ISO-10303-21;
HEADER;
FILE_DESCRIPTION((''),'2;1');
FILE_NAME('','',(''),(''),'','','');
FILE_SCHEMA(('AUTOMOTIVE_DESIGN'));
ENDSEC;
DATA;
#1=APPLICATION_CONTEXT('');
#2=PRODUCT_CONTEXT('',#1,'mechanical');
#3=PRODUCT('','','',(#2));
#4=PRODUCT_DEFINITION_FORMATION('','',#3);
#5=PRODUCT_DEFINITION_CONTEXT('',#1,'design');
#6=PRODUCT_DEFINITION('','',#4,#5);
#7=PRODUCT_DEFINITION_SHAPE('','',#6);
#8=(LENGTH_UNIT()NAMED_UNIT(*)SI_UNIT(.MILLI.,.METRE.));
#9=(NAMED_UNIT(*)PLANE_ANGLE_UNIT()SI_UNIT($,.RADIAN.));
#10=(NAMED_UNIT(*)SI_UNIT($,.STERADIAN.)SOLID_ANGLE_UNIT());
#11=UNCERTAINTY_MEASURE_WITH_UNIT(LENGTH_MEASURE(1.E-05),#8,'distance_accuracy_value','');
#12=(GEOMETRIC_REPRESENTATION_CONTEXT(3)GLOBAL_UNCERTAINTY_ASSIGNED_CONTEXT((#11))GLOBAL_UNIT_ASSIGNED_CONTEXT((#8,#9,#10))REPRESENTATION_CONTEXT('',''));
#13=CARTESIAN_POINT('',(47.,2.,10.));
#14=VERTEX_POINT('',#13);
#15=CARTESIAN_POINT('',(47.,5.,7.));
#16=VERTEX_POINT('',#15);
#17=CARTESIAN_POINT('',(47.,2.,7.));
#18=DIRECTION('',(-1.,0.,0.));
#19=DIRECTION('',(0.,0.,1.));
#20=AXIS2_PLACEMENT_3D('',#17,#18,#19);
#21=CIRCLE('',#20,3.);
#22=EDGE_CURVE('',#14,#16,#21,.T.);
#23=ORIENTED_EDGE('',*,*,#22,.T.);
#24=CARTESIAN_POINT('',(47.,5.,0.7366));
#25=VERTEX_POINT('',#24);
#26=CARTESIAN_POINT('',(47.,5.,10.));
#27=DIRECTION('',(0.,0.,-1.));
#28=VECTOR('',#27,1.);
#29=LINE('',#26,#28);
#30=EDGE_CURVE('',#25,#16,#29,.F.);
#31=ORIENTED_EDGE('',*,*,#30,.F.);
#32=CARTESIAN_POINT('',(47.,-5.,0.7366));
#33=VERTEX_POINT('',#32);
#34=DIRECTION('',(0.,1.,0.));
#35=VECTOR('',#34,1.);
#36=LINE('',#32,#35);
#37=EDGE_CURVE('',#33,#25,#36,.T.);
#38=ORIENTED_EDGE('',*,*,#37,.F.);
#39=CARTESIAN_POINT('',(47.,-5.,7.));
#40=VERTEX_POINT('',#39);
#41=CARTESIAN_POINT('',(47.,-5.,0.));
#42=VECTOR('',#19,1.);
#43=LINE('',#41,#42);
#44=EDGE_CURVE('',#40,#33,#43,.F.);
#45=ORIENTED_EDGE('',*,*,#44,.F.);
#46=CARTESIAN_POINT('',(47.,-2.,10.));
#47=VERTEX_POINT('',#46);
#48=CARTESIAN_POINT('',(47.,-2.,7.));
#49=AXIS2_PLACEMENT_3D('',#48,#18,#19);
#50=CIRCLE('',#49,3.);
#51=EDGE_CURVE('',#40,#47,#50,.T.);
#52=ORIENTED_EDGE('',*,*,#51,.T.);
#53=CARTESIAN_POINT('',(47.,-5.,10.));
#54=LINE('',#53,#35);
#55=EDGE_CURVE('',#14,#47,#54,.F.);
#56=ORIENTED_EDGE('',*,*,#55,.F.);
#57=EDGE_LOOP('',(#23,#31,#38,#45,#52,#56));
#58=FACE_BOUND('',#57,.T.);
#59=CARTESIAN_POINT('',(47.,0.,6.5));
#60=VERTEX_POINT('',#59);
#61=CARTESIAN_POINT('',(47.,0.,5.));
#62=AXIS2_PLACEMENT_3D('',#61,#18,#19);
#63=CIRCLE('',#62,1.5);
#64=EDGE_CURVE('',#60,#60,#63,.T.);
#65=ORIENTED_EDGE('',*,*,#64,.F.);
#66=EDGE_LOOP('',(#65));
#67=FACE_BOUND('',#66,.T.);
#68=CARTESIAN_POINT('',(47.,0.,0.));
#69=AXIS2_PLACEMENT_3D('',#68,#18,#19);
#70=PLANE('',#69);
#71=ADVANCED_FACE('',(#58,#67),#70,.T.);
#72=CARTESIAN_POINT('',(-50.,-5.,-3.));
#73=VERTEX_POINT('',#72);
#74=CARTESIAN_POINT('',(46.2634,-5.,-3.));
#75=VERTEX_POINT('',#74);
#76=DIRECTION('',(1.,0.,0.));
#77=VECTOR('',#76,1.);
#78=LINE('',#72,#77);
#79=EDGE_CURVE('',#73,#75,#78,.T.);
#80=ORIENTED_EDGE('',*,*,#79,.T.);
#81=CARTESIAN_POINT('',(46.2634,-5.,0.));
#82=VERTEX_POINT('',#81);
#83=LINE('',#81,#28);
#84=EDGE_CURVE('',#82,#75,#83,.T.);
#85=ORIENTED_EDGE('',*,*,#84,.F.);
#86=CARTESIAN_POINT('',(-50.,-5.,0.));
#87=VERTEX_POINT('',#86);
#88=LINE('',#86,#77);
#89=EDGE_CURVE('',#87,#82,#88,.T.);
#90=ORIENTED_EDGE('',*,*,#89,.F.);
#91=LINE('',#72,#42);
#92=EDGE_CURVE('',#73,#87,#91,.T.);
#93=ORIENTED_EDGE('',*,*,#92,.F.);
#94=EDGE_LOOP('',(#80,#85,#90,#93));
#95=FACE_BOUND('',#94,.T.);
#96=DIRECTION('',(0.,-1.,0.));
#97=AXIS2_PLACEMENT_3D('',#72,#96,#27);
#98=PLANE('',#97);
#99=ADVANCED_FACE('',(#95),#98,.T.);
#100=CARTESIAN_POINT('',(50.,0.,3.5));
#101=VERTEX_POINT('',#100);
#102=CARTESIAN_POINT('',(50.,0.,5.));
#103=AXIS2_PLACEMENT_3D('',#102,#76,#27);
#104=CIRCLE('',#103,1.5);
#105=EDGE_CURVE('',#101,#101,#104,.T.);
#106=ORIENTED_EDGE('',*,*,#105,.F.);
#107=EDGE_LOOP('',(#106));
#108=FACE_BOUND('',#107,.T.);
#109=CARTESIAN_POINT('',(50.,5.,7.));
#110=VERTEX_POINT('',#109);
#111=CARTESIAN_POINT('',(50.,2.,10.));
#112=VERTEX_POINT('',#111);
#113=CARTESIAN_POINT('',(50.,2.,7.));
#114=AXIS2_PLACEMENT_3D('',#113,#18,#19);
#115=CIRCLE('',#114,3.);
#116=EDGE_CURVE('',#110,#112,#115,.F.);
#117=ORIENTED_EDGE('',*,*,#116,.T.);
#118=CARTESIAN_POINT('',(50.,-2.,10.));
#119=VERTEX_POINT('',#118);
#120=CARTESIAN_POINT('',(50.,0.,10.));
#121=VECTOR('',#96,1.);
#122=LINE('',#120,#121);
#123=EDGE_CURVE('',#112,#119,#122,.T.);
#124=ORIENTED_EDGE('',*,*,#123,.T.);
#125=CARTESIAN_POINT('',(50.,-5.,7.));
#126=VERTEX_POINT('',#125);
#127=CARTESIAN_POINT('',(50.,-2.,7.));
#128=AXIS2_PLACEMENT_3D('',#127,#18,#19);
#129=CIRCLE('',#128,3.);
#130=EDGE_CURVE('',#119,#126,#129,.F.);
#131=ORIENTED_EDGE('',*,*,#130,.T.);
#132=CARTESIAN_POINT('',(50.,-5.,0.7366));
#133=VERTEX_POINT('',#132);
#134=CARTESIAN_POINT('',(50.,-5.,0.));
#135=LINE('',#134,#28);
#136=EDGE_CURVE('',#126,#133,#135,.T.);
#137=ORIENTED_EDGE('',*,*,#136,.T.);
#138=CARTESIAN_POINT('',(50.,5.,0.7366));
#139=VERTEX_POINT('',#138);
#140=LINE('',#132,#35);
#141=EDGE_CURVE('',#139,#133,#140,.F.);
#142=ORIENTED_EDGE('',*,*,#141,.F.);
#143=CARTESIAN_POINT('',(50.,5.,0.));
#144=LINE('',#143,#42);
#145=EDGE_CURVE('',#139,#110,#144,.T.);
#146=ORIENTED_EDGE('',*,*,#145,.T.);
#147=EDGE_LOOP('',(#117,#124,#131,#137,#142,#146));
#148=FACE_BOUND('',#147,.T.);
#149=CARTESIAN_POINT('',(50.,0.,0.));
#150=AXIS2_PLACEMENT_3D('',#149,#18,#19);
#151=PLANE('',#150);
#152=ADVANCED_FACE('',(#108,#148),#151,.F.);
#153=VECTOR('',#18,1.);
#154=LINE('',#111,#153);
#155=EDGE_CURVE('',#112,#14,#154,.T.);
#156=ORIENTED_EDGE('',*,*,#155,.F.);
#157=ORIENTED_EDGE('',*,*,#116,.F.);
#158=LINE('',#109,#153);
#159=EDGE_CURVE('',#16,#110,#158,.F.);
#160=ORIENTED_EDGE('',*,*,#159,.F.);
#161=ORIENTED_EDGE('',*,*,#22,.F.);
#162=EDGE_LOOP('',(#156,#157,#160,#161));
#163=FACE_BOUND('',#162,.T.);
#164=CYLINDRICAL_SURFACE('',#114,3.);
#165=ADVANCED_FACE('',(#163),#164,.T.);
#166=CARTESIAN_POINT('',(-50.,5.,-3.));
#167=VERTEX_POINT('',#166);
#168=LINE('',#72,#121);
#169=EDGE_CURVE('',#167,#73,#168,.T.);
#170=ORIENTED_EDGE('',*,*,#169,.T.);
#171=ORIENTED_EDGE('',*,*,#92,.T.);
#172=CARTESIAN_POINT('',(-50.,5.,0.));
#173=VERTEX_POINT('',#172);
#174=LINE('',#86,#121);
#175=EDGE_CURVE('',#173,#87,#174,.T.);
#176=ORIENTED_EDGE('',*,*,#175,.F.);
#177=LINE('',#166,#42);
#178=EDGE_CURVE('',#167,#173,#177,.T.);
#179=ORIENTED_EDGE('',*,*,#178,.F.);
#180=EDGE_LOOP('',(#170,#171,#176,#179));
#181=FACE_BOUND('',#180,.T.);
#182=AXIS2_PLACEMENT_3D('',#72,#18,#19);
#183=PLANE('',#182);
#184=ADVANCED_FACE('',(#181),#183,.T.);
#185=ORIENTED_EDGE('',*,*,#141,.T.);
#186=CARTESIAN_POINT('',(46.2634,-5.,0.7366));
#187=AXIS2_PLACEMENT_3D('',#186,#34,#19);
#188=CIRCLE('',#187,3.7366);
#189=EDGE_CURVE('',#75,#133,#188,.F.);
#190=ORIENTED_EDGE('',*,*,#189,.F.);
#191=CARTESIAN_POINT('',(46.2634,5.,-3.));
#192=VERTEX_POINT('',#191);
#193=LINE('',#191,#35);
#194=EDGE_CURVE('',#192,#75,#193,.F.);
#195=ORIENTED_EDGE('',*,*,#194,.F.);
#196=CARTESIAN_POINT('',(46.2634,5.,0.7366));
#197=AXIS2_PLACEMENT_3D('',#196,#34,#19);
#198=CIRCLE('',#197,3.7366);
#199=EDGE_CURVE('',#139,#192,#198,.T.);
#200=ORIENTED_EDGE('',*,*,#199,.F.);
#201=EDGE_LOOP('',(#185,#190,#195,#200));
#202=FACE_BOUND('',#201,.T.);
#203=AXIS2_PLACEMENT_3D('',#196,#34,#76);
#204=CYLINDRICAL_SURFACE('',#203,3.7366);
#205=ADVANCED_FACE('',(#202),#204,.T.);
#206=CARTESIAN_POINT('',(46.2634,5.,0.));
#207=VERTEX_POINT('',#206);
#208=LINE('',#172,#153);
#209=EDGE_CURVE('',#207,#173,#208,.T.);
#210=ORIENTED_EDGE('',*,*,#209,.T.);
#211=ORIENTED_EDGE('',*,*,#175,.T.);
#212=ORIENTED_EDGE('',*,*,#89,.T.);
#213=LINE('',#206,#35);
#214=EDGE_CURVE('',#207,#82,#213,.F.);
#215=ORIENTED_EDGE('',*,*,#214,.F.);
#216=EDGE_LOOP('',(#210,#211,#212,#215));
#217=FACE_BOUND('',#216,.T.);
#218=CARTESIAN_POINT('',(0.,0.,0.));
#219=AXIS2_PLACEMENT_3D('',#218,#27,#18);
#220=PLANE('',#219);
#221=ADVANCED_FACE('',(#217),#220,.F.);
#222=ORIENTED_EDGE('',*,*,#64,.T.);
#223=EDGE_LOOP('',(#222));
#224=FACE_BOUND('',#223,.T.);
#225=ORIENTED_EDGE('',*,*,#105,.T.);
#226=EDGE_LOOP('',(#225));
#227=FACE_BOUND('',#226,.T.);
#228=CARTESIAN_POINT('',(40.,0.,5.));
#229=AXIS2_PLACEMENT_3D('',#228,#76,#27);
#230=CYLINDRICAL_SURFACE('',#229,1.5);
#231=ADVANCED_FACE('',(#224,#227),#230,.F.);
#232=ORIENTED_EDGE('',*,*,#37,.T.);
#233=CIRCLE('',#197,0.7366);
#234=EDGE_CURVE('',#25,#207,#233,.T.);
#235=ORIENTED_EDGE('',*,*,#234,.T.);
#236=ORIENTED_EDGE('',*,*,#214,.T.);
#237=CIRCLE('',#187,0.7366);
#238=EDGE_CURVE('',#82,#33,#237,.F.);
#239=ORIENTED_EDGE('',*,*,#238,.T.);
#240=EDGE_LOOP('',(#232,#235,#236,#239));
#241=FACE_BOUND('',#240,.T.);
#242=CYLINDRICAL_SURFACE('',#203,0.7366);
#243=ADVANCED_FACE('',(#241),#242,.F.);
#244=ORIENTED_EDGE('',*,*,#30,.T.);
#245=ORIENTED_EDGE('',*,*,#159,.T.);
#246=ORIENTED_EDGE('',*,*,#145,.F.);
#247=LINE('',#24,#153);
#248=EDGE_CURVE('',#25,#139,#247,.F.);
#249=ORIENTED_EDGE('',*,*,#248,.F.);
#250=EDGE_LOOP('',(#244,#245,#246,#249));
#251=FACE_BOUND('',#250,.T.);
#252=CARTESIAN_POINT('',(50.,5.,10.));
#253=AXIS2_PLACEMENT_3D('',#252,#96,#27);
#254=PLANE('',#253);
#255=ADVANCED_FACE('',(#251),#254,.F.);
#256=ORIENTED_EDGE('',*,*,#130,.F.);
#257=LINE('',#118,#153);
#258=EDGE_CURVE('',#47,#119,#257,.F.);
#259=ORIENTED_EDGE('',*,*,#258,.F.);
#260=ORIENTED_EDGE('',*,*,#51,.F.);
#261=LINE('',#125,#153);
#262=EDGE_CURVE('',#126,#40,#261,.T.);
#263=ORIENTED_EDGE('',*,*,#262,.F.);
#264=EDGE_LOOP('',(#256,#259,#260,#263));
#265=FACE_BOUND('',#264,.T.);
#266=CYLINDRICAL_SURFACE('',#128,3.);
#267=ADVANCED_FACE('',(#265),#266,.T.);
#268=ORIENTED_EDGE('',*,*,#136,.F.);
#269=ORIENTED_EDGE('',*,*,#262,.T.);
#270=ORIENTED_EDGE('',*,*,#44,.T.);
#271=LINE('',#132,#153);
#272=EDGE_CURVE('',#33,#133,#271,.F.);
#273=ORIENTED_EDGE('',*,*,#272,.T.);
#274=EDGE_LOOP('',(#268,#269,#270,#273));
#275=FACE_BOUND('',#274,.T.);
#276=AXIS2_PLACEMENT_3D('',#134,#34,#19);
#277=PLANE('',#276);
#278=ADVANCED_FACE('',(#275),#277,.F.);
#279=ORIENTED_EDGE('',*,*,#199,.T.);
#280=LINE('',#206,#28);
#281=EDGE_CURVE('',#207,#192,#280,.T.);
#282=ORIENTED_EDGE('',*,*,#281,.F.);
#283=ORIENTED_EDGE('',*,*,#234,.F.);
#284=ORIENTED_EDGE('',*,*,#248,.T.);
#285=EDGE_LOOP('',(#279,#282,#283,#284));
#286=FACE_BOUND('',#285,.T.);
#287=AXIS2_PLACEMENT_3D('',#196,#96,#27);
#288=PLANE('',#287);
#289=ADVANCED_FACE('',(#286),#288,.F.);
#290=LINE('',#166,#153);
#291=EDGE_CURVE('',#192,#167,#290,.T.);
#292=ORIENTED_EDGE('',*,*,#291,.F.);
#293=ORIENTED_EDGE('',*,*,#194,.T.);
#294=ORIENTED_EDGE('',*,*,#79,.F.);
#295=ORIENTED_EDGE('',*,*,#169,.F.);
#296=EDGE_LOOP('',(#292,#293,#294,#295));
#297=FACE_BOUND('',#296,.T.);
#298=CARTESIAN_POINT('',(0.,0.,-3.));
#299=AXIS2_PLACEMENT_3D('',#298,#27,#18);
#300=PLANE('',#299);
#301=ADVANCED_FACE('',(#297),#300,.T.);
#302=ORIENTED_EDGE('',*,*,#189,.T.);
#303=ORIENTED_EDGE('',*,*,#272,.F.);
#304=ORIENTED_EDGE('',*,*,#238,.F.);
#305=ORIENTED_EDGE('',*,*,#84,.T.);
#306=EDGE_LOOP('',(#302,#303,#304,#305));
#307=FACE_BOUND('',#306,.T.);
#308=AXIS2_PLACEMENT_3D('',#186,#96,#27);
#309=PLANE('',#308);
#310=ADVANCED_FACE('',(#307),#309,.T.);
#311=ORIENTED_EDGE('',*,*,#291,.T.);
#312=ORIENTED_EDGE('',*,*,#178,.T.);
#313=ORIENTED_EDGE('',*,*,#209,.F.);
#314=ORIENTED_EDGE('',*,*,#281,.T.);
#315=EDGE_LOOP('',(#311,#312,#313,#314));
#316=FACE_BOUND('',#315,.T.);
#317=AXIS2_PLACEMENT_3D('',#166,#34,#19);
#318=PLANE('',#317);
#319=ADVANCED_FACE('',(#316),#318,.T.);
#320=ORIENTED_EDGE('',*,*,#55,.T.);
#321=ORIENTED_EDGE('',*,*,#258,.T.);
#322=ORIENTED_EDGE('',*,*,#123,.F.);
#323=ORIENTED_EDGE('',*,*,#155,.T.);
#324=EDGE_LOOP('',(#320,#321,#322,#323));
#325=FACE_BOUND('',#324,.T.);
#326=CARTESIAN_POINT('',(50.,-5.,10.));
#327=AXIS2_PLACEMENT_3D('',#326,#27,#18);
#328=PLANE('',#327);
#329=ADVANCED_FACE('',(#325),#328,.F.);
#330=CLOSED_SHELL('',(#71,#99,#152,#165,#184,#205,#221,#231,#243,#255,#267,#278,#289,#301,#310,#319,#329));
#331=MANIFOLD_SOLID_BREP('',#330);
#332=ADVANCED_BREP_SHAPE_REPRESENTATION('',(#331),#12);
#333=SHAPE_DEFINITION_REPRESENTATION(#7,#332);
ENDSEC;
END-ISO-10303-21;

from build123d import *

# Parameters (mm, degrees)
SKETCH_1_W                       = 100
SKETCH_1_H                       = 10
SM_BASE_FLANGE_1_DEPTH           = 3
SM_EDGE_FLANGE_1_STRIP_W         = 13.4732
SM_EDGE_FLANGE_1_STRIP_H         = 3
SM_EDGE_FLANGE_1_STRIP_CUT_DEPTH = 10
SM_EDGE_FLANGE_1_DEPTH           = 10
SKETCH_9_R                       = 1.5
CUT_EXTRUDE_1_DEPTH              = 10
FILLET_1_R                       = 3


# Sheet-metal steps are written as plain solids
with BuildPart() as part:
    # Sketch 1 → 基体-法兰1 (new body)
    with BuildSketch(Plane.XY):
        Rectangle(SKETCH_1_W, SKETCH_1_H)
    extrude(amount=-SM_BASE_FLANGE_1_DEPTH)

    # 边线-法兰1 strip (across the edge) → 边线-法兰1 strip cut (cut)
    with BuildSketch(Plane(origin=(50, -5, 0), x_dir=(-1, 0, 0), z_dir=(0, 1, 0))):
        with Locations((-3, -1.5)):
            Rectangle(SM_EDGE_FLANGE_1_STRIP_W, SM_EDGE_FLANGE_1_STRIP_H)
    extrude(amount=SM_EDGE_FLANGE_1_STRIP_CUT_DEPTH, mode=Mode.SUBTRACT)

    # 边线-法兰1 section (across the edge) → 边线-法兰1 (add)
    with BuildSketch(Plane(origin=(50, -5, 0), x_dir=(-1, 0, 0), z_dir=(0, 1, 0))):
        with BuildLine():
            Line((0, 0.7366), (0, 10))
            Line((0, 10), (3, 10))
            Line((3, 10), (3, 0.7366))
            ThreePointArc((3, 0.7366), (3.215745145, 0.215745145), (3.7366, 0))
            Line((3.7366, 0), (3.7366, -3))
            ThreePointArc((3.7366, -3), (1.094424801, -1.905575199), (0, 0.7366))
        make_face()
    extrude(amount=SM_EDGE_FLANGE_1_DEPTH)

    # 草图9 → 切除-拉伸1 (cut)
    with BuildSketch(Plane(origin=(50, 0, 0), x_dir=(0, 0, -1), z_dir=(1, 0, 0))):
        with Locations((-5, 0)):
            Circle(SKETCH_9_R)
    extrude(amount=-CUT_EXTRUDE_1_DEPTH, mode=Mode.SUBTRACT)

    # 圆角1
    fillet_1_edges = [part.edges().sort_by_distance(p)[0] for p in [
        (48.5, -5, 10),
        (48.5, 5, 10),
    ]]
    fillet(fillet_1_edges, radius=FILLET_1_R)


solid = part.part
